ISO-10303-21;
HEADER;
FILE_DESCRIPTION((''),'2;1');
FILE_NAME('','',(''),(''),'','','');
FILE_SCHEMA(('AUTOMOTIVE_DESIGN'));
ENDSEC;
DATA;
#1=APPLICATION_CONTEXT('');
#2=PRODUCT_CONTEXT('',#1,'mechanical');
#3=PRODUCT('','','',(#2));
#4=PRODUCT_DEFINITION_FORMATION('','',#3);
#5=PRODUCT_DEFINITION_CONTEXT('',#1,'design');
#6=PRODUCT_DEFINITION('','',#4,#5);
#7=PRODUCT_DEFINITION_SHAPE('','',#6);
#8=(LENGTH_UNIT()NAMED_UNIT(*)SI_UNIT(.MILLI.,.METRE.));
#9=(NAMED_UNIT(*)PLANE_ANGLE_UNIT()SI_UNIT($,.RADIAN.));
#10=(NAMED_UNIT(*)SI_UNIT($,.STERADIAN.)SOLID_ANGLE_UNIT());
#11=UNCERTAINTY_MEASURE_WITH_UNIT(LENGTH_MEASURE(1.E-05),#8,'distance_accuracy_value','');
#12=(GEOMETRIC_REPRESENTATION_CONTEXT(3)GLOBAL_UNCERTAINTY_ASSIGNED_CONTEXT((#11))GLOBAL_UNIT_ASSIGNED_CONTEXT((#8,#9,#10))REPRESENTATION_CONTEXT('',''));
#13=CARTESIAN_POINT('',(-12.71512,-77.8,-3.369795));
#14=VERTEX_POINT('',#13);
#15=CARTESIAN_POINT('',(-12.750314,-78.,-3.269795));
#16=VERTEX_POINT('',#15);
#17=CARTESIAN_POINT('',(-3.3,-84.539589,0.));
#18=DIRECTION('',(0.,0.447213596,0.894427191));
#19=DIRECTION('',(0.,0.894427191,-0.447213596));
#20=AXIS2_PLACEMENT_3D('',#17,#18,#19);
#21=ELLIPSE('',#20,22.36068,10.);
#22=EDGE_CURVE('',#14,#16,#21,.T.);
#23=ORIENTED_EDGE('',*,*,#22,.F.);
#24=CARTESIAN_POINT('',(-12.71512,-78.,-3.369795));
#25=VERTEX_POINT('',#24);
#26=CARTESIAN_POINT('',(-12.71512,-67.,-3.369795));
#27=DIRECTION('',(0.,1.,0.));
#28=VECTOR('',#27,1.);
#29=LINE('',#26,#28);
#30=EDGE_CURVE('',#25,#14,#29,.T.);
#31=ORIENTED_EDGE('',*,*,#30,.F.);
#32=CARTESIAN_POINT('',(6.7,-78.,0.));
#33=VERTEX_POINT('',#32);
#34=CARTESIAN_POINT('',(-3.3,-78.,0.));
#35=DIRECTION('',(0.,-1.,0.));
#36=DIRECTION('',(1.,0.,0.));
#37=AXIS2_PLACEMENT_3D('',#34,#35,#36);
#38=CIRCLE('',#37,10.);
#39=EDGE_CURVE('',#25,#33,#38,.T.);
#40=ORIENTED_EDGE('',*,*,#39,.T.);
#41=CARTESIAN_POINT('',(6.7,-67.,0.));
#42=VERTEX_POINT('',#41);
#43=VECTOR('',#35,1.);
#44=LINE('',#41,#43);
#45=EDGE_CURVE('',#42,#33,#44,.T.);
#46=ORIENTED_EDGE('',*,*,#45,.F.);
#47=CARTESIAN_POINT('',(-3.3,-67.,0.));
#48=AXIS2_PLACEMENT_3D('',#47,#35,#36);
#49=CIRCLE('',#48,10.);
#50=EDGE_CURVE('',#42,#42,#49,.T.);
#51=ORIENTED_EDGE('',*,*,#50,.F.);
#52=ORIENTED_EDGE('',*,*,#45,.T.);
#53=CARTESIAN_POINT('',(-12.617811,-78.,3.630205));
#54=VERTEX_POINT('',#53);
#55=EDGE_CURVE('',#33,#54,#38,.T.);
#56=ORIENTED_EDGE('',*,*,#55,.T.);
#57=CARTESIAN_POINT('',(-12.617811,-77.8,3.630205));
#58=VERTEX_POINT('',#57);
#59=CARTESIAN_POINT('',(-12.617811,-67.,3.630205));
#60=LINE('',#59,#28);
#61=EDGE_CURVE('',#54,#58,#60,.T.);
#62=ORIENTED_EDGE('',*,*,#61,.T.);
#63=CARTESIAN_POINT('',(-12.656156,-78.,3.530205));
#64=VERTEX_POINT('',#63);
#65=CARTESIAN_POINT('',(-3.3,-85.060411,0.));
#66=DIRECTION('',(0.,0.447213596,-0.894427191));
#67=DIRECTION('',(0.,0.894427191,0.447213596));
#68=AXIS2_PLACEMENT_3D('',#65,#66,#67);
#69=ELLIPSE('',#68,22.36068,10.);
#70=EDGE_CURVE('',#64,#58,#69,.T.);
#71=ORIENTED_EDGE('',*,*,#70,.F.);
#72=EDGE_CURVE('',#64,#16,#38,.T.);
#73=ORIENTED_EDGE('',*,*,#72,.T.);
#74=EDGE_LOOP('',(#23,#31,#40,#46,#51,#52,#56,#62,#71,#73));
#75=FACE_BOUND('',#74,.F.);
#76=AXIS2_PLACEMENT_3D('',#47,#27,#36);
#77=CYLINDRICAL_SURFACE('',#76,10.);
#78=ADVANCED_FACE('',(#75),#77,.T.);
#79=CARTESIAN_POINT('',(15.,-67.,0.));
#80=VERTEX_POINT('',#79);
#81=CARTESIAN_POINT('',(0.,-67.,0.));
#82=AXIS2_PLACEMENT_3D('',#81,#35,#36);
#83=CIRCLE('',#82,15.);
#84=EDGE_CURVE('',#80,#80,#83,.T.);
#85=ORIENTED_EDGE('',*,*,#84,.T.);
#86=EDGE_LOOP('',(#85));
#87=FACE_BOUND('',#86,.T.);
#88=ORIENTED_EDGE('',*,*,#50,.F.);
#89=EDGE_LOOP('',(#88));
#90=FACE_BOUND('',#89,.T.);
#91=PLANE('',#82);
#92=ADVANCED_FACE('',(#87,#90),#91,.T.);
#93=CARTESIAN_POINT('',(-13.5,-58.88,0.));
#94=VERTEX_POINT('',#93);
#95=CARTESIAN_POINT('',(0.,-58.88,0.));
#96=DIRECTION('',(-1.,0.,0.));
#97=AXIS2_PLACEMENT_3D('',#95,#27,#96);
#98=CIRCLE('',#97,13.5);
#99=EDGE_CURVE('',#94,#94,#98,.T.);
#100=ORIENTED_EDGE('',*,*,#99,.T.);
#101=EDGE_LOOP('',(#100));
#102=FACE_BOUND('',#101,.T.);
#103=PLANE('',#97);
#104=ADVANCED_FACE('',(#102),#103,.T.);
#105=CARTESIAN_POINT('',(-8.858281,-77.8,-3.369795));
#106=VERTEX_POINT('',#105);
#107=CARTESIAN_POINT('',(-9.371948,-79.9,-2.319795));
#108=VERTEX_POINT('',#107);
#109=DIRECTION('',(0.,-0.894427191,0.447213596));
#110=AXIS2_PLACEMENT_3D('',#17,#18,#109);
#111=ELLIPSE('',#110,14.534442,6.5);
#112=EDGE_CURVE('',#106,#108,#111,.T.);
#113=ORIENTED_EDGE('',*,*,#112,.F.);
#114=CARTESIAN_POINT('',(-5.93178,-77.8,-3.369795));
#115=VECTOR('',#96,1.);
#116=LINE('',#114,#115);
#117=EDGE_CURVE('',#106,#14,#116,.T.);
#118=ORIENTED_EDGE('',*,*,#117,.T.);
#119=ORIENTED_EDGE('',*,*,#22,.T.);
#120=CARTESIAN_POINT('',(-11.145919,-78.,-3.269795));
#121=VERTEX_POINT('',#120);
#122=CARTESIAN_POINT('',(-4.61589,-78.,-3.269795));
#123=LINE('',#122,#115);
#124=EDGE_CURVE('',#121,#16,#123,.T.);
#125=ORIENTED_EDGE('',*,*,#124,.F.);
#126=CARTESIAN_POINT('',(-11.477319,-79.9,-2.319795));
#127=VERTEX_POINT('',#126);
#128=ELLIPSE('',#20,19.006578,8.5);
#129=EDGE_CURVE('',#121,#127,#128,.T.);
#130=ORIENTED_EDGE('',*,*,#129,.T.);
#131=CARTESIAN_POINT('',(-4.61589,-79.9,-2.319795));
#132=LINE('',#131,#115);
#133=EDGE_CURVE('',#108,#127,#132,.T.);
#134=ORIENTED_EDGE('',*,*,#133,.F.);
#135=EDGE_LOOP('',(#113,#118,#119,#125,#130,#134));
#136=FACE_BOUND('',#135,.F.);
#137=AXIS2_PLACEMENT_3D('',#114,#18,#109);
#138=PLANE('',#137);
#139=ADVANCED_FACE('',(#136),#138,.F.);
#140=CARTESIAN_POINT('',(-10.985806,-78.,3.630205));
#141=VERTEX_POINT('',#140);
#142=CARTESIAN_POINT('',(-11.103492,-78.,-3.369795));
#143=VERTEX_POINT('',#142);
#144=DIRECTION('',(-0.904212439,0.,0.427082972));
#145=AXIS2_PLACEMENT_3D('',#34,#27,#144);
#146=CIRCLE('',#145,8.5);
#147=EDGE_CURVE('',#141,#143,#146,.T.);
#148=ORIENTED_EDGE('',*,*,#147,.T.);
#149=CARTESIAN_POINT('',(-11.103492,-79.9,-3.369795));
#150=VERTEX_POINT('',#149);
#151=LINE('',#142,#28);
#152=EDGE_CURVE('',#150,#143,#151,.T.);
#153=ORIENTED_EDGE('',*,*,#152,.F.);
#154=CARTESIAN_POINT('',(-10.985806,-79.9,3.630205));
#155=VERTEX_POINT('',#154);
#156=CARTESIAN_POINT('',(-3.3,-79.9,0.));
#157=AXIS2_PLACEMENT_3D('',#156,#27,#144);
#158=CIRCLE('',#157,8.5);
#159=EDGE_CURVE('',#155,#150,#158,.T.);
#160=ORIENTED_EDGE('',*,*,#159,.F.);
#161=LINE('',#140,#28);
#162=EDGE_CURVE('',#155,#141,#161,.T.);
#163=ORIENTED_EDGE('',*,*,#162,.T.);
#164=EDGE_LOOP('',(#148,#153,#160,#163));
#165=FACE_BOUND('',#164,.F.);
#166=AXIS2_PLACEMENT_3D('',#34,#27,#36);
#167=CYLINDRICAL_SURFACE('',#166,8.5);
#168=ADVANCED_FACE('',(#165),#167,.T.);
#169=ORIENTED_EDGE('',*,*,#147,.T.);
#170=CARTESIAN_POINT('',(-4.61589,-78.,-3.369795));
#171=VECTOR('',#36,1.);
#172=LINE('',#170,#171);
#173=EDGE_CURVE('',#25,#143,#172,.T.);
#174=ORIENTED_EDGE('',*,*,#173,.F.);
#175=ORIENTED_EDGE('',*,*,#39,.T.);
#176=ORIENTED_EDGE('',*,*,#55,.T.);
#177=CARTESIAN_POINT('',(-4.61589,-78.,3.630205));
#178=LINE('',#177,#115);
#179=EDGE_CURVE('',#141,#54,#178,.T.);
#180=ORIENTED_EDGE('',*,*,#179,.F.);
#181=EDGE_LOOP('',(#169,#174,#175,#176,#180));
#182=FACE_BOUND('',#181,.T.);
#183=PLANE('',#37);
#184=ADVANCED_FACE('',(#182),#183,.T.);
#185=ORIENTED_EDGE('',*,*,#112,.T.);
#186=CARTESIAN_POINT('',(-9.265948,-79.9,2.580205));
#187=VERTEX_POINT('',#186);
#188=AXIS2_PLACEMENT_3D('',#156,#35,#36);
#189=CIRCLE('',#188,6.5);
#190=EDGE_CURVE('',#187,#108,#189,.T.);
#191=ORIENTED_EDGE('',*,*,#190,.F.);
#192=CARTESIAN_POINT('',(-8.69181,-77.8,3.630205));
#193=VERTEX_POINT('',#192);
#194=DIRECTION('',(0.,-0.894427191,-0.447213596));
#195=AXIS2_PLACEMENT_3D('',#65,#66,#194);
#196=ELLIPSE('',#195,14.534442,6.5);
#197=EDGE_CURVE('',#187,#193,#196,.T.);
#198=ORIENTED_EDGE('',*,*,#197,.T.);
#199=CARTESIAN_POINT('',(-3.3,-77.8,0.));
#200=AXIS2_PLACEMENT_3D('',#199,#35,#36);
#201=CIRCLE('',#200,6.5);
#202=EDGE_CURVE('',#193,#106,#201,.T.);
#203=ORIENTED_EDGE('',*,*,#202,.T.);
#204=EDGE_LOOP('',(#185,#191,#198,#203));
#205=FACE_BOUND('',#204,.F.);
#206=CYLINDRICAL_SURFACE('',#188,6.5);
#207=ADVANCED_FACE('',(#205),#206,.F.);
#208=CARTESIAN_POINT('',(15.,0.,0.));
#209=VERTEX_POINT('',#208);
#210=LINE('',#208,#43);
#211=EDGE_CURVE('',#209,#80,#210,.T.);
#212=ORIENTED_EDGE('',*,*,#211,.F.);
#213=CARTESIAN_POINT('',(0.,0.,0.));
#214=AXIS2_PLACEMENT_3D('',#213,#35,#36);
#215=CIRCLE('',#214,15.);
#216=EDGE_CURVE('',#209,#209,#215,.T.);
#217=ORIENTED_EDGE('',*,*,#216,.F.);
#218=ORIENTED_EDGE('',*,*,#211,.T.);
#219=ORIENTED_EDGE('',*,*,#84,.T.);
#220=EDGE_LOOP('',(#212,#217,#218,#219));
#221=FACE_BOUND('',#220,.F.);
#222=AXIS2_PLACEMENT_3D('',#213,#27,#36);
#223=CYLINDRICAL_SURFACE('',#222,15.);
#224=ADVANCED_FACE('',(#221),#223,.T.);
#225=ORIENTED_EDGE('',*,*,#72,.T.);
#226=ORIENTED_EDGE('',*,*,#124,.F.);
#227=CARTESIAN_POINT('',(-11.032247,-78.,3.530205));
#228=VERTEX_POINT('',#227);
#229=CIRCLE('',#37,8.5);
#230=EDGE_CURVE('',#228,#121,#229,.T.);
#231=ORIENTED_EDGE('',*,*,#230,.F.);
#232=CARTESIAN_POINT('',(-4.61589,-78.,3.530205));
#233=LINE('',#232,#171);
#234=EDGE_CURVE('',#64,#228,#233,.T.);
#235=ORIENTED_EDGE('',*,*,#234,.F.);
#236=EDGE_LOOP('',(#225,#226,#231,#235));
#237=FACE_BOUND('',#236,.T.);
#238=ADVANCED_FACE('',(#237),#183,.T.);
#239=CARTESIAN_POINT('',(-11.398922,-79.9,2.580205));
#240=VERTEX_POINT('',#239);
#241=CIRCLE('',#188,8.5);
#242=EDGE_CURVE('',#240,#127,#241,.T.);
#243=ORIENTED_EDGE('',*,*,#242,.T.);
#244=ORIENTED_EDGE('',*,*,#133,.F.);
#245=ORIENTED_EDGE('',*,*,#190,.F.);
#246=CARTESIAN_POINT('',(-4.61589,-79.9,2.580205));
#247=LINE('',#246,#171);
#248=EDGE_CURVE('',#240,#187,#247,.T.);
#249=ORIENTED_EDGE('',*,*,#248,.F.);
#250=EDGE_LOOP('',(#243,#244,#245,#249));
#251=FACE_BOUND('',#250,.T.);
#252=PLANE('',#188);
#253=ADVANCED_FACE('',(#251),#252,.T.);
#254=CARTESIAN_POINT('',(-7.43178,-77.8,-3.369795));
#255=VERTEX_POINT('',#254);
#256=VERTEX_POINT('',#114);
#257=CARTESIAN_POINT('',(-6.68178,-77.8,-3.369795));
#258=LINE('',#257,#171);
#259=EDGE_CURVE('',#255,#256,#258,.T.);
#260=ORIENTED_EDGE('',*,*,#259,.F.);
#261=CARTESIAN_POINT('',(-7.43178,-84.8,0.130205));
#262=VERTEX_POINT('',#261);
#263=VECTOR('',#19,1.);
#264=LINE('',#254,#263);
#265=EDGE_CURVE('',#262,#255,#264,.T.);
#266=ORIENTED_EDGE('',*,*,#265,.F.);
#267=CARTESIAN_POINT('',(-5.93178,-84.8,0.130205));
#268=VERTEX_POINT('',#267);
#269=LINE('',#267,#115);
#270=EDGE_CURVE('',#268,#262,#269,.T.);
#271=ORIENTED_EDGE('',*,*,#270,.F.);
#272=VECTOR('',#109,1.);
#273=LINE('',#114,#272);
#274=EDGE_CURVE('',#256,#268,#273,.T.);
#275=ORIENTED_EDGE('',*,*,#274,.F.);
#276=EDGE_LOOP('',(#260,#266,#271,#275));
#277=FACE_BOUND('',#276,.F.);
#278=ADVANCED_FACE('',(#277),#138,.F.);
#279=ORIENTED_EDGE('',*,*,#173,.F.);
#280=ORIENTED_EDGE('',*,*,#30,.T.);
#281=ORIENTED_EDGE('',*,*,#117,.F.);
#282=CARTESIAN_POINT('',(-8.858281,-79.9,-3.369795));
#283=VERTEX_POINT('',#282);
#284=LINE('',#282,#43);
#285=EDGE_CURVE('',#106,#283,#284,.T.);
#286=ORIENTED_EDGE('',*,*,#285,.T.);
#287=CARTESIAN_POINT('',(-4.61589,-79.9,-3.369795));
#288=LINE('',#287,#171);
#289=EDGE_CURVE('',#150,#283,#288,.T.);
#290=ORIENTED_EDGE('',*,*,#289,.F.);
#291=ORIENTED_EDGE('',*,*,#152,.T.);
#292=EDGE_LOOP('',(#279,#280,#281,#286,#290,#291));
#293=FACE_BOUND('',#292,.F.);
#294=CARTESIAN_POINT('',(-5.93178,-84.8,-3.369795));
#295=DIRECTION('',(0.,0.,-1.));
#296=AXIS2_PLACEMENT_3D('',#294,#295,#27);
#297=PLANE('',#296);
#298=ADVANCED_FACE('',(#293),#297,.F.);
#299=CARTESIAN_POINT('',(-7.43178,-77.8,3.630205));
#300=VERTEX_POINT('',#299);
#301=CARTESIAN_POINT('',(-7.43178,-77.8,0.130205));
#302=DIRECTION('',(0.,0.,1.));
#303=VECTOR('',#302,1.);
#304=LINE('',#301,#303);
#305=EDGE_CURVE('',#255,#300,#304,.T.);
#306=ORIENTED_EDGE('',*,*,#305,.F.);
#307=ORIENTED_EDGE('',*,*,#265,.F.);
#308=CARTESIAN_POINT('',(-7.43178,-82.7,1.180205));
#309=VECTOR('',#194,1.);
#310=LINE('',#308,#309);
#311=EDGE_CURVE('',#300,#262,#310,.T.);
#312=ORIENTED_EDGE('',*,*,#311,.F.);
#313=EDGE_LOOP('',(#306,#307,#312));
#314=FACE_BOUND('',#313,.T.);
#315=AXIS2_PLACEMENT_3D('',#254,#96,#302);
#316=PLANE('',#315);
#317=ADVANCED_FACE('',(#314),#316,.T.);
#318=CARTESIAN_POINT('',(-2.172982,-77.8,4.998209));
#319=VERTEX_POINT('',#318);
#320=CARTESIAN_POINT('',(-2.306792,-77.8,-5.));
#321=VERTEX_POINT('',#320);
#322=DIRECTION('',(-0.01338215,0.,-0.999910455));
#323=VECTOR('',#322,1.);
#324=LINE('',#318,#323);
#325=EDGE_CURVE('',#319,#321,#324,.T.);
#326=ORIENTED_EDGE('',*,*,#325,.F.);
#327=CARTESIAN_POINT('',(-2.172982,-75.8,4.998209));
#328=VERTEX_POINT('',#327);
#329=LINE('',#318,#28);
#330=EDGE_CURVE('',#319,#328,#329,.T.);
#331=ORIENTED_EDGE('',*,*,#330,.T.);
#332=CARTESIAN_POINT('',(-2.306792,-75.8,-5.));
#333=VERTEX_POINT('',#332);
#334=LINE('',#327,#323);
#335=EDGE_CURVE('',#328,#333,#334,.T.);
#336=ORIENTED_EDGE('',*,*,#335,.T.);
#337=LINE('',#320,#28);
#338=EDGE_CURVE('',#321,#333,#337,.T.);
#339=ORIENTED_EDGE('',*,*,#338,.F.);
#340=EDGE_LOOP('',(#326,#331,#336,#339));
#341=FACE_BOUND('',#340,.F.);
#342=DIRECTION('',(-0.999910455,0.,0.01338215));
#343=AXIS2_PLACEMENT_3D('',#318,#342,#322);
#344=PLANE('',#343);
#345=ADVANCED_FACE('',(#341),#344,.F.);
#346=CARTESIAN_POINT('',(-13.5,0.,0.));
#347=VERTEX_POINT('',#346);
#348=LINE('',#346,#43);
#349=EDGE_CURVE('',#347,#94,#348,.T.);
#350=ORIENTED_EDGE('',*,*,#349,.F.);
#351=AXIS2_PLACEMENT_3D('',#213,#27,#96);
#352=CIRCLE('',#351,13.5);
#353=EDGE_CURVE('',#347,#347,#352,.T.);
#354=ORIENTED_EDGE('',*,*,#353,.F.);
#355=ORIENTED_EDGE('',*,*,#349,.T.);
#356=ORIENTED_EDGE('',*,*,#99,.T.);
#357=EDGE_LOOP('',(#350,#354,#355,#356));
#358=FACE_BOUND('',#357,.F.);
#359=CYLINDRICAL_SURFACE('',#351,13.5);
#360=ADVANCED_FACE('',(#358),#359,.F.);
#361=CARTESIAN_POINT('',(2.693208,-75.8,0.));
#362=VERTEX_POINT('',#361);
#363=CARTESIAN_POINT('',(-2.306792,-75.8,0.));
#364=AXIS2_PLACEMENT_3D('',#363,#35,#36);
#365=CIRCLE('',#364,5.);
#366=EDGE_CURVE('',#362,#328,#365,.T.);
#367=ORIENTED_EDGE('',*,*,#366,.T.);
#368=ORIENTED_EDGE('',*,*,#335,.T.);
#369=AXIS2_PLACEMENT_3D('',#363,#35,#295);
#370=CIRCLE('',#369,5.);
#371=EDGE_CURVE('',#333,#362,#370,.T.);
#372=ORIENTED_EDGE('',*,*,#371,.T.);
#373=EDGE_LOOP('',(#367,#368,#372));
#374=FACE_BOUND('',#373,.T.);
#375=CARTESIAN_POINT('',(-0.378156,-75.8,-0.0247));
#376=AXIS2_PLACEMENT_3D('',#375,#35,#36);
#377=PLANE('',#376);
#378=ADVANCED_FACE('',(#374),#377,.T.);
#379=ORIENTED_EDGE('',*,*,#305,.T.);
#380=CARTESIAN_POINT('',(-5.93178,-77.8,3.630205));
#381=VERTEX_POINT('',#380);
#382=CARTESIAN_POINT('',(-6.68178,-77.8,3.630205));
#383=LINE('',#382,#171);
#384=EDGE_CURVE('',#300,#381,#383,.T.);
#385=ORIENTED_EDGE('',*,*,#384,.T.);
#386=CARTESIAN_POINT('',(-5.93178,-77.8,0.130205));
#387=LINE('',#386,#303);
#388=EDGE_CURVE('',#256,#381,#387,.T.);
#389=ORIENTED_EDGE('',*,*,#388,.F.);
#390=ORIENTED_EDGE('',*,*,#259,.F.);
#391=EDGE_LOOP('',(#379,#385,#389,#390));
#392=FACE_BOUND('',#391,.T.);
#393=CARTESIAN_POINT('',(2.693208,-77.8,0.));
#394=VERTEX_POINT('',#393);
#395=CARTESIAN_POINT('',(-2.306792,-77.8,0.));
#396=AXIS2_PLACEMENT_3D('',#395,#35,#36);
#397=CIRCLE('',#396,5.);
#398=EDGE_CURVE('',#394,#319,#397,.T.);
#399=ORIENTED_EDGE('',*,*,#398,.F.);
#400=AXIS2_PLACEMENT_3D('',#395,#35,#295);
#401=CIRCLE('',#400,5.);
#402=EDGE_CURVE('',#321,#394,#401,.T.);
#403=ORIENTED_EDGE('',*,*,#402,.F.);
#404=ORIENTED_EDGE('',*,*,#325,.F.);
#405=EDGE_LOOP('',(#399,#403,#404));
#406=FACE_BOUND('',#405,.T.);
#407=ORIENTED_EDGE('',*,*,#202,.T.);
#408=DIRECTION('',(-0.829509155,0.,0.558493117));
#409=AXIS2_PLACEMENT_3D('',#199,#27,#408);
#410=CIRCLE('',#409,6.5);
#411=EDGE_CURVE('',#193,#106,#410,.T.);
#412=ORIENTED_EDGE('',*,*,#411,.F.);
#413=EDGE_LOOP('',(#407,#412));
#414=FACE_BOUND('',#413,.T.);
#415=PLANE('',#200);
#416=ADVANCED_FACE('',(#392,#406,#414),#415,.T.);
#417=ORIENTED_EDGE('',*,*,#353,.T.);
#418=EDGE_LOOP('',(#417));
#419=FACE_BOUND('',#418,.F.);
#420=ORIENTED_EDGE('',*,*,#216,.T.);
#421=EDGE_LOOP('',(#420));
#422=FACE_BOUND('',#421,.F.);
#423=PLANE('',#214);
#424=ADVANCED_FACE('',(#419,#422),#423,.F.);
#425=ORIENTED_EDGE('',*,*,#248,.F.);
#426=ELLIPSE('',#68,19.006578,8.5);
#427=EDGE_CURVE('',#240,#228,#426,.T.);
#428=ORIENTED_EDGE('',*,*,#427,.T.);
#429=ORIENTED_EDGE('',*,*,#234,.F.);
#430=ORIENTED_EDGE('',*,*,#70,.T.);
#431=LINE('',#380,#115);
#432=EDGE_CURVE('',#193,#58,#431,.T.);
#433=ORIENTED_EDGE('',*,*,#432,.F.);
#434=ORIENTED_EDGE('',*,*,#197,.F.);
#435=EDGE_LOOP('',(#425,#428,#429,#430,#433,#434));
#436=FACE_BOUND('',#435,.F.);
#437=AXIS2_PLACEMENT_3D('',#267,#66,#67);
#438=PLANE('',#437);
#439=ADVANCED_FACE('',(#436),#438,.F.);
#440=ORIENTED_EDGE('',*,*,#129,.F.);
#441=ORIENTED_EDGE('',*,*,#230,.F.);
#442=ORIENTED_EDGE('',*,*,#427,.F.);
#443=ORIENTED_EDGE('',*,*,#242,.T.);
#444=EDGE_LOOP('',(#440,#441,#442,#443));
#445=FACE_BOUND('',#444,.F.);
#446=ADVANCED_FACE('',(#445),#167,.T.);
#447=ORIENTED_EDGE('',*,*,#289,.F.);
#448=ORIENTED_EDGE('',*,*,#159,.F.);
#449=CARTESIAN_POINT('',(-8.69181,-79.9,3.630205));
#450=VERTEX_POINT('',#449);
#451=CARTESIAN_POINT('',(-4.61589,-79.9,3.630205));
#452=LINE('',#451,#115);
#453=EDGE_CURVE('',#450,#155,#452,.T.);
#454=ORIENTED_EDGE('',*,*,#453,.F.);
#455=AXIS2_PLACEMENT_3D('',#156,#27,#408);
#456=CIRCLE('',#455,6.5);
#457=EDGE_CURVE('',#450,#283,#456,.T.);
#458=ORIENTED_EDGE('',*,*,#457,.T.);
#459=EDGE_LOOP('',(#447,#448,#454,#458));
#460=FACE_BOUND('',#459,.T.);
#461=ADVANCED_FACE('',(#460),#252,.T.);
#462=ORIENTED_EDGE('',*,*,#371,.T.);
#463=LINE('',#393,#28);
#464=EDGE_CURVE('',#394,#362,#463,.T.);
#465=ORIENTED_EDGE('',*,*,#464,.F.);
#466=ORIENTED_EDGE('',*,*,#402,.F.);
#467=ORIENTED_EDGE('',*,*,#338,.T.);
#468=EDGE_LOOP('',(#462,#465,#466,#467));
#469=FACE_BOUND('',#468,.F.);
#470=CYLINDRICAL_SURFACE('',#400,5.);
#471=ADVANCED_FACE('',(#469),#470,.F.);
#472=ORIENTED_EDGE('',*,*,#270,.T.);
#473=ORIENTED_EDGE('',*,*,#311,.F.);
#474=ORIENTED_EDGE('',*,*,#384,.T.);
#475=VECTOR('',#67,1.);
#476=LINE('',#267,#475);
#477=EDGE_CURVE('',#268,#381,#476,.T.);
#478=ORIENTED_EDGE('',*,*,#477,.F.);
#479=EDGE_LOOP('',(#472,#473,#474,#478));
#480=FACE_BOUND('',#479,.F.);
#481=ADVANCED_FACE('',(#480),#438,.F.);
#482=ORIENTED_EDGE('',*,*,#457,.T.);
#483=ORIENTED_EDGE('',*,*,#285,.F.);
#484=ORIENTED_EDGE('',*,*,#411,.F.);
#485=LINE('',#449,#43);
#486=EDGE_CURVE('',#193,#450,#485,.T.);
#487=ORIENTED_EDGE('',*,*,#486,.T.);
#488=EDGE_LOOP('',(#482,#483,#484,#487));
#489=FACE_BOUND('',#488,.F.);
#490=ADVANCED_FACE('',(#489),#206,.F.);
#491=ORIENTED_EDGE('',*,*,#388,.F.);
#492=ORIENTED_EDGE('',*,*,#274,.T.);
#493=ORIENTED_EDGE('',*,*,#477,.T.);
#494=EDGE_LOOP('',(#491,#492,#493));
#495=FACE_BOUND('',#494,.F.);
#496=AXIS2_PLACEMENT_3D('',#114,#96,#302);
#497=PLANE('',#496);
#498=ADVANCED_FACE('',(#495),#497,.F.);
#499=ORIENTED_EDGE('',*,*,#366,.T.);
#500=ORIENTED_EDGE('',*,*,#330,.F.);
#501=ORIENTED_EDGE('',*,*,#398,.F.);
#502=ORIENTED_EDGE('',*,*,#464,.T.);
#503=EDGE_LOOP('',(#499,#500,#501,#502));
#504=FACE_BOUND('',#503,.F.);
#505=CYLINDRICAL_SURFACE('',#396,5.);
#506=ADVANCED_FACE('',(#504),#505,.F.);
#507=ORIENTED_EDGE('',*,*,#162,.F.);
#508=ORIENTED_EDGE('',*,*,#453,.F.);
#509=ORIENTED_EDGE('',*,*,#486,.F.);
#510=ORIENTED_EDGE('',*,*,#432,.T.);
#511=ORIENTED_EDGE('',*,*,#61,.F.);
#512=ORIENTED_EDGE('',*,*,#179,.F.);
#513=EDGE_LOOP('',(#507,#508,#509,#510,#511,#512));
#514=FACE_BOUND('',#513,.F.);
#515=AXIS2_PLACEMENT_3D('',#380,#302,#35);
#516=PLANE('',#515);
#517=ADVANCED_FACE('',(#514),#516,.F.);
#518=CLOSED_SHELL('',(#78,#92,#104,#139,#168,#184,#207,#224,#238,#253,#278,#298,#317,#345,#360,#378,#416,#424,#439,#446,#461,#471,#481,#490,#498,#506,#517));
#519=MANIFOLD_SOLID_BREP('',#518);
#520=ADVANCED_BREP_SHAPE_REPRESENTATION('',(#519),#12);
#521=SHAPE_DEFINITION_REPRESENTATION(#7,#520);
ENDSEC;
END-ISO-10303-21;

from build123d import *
from build123d import SkipClean  # not in build123d's __all__

# Parameters (mm, degrees)
F0_R      = 15
F1_DEPTH  = 67
F2_R      = 10
F3_DEPTH  = 11
F4_R      = 8.5
F5_DEPTH  = 1.9
F6_R      = 6.5
F7_DEPTH  = 2.1
F9_DEPTH  = 2
F10_W     = 1.5
F10_H     = 7
F11_DEPTH = 7
F13_DEPTH = 9.0692195411
F15_DEPTH = 25
F16_R     = 13.5
F17_DEPTH = 58.88


with BuildPart() as f1:
    # F0 (on Front) → F1 (new body)
    with BuildSketch(Plane.XZ):
        Circle(F0_R)
    extrude(amount=F1_DEPTH)

    # F2 (on face) → F3 (join)
    with BuildSketch(Plane.XZ.offset(67)):
        with Locations((-3.3, 0)):
            Circle(F2_R)
    extrude(amount=F3_DEPTH)

    # F4 (on face) → F5 (join)
    with BuildSketch(Plane.XZ.offset(78)):
        with Locations((-3.3, 0)):
            Circle(F4_R)
    extrude(amount=F5_DEPTH)

    # F6 (on face) → F7 (cut)
    with BuildSketch(Plane.XZ.offset(79.9)):
        with Locations((-3.3, 0)):
            Circle(F6_R)
    extrude(amount=-F7_DEPTH, mode=Mode.SUBTRACT)

    # F8 (on face) → F9 (cut)
    with BuildSketch(Plane.XZ.offset(77.8)):
        with BuildLine():
            ThreePointArc((-2.3067915896, -5), (1.2287423164, -3.5355339059), (2.6932084104, 0))
            ThreePointArc((2.6932084104, 0), (1.2757387706, 3.4879042731), (-2.1729820769, 4.9982091807))
            Line((-2.1729820769, 4.9982091807), (-2.3067915896, -5))
        make_face()
    extrude(amount=-F9_DEPTH, mode=Mode.SUBTRACT)

    # F10 (on face) → F11 (join)
    with BuildSketch(Plane.XZ.offset(77.8)):
        with Locations((-6.6817804589, 0.1302052614)):
            Rectangle(F10_W, F10_H)
    extrude(amount=F11_DEPTH)

    # F12 (on face) → F13 (cut, through all)
    with BuildSketch(Plane.YZ.offset(-5.9317804589)):
        Polygon((-77.8, -3.3697947386), (-84.8, 0.1302052614), (-84.8, -3.3697947386), align=None)
    with SkipClean():  # cleaning this boolean's faces spoils the solid; the shape is the same uncleaned
        extrude(amount=-F13_DEPTH, mode=Mode.SUBTRACT)

    # F14 (on face) → F15 (cut)
    with BuildSketch(Plane.YZ.offset(-5.9317804589)):
        Polygon((-84.8, 3.6302052614), (-84.8, 0.1302052614), (-77.8, 3.6302052614), align=None)
    extrude(amount=-F15_DEPTH, mode=Mode.SUBTRACT)

    # F16 (on face) → F17 (cut)
    with BuildSketch(Plane(origin=(0, 0, 0), x_dir=(-1, 0, 0), z_dir=(0, 1, 0))):
        Circle(F16_R)
    extrude(amount=-F17_DEPTH, mode=Mode.SUBTRACT)


solid = f1.part
